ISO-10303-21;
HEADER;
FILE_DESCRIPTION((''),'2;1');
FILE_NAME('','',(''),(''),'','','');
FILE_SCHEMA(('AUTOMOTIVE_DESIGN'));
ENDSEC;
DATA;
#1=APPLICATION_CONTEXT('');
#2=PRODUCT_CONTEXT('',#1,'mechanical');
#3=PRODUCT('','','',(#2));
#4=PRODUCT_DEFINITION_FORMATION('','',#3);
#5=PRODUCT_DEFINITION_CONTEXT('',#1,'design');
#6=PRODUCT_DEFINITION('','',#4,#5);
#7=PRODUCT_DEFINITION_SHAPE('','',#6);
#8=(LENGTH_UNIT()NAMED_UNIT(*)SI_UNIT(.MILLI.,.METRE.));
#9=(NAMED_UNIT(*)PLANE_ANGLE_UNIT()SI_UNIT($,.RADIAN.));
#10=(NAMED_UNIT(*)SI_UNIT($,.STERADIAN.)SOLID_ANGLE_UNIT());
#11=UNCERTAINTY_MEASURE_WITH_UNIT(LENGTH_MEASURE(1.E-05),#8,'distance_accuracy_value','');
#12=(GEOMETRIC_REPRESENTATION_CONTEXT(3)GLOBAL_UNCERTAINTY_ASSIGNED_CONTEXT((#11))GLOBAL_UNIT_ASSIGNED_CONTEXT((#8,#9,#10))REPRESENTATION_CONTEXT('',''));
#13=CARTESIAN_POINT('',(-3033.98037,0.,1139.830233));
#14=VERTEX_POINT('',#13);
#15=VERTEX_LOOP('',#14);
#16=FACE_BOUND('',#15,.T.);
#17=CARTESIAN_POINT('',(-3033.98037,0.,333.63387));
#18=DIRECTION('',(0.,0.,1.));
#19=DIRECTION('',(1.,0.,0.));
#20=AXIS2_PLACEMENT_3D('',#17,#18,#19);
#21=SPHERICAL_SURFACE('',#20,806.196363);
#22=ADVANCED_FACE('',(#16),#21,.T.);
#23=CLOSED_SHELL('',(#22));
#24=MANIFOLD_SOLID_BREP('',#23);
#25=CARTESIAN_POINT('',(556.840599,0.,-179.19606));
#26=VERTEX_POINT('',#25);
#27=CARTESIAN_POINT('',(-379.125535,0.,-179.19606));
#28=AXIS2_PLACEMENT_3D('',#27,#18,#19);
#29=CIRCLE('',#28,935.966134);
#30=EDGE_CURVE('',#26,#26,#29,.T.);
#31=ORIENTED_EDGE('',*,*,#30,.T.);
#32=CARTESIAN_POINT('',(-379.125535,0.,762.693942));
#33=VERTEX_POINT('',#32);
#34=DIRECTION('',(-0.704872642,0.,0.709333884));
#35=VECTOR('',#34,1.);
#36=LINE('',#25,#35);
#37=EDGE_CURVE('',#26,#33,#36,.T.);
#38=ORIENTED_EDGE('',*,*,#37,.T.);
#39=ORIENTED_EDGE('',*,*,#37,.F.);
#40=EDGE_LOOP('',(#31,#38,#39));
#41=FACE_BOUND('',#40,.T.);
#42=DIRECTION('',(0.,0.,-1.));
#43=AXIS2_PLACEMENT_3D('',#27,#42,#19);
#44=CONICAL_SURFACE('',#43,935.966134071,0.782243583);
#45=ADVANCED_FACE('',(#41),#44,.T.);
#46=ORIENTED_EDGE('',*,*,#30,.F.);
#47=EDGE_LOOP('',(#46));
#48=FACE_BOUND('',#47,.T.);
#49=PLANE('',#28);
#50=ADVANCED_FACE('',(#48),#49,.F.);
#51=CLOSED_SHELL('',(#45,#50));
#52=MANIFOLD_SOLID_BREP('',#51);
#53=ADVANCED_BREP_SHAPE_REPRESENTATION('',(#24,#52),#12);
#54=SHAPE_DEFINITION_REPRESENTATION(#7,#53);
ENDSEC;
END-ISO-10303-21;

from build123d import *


with BuildPart() as f1:
    # F0 (on Front) → F1 (revolve)
    with BuildSketch(Plane.XZ):
        Polygon((-379.1255354881, 762.6939415932), (-379.1255354881, -179.1960597038), (556.8405985832, -179.1960597038), align=None)
    revolve(axis=Axis((-379.1255354881, 0, 291.7489409447), (0, 0, 1)))


with BuildPart() as f3:
    # F2 (on Front) → F3 (revolve)
    with BuildSketch(Plane.XZ):
        with BuildLine():
            ThreePointArc((-3033.9803695679, -472.5624929023), (-2463.913454472, -236.4330452094), (-2227.7840067791, 333.6338698864))
            ThreePointArc((-2227.7840067791, 333.6338698864), (-2463.913454472, 903.7007849822), (-3033.9803695679, 1139.8302326751))
            Line((-3033.9803695679, 1139.8302326751), (-3033.9803695679, 333.6338698864))
            Line((-3033.9803695679, 333.6338698864), (-3033.9803695679, -472.5624929023))
        make_face()
    revolve(axis=Axis((-3033.9803695679, 0, 333.6338698864), (0, 0, 1)))


solid = Compound([f1.part, f3.part])
